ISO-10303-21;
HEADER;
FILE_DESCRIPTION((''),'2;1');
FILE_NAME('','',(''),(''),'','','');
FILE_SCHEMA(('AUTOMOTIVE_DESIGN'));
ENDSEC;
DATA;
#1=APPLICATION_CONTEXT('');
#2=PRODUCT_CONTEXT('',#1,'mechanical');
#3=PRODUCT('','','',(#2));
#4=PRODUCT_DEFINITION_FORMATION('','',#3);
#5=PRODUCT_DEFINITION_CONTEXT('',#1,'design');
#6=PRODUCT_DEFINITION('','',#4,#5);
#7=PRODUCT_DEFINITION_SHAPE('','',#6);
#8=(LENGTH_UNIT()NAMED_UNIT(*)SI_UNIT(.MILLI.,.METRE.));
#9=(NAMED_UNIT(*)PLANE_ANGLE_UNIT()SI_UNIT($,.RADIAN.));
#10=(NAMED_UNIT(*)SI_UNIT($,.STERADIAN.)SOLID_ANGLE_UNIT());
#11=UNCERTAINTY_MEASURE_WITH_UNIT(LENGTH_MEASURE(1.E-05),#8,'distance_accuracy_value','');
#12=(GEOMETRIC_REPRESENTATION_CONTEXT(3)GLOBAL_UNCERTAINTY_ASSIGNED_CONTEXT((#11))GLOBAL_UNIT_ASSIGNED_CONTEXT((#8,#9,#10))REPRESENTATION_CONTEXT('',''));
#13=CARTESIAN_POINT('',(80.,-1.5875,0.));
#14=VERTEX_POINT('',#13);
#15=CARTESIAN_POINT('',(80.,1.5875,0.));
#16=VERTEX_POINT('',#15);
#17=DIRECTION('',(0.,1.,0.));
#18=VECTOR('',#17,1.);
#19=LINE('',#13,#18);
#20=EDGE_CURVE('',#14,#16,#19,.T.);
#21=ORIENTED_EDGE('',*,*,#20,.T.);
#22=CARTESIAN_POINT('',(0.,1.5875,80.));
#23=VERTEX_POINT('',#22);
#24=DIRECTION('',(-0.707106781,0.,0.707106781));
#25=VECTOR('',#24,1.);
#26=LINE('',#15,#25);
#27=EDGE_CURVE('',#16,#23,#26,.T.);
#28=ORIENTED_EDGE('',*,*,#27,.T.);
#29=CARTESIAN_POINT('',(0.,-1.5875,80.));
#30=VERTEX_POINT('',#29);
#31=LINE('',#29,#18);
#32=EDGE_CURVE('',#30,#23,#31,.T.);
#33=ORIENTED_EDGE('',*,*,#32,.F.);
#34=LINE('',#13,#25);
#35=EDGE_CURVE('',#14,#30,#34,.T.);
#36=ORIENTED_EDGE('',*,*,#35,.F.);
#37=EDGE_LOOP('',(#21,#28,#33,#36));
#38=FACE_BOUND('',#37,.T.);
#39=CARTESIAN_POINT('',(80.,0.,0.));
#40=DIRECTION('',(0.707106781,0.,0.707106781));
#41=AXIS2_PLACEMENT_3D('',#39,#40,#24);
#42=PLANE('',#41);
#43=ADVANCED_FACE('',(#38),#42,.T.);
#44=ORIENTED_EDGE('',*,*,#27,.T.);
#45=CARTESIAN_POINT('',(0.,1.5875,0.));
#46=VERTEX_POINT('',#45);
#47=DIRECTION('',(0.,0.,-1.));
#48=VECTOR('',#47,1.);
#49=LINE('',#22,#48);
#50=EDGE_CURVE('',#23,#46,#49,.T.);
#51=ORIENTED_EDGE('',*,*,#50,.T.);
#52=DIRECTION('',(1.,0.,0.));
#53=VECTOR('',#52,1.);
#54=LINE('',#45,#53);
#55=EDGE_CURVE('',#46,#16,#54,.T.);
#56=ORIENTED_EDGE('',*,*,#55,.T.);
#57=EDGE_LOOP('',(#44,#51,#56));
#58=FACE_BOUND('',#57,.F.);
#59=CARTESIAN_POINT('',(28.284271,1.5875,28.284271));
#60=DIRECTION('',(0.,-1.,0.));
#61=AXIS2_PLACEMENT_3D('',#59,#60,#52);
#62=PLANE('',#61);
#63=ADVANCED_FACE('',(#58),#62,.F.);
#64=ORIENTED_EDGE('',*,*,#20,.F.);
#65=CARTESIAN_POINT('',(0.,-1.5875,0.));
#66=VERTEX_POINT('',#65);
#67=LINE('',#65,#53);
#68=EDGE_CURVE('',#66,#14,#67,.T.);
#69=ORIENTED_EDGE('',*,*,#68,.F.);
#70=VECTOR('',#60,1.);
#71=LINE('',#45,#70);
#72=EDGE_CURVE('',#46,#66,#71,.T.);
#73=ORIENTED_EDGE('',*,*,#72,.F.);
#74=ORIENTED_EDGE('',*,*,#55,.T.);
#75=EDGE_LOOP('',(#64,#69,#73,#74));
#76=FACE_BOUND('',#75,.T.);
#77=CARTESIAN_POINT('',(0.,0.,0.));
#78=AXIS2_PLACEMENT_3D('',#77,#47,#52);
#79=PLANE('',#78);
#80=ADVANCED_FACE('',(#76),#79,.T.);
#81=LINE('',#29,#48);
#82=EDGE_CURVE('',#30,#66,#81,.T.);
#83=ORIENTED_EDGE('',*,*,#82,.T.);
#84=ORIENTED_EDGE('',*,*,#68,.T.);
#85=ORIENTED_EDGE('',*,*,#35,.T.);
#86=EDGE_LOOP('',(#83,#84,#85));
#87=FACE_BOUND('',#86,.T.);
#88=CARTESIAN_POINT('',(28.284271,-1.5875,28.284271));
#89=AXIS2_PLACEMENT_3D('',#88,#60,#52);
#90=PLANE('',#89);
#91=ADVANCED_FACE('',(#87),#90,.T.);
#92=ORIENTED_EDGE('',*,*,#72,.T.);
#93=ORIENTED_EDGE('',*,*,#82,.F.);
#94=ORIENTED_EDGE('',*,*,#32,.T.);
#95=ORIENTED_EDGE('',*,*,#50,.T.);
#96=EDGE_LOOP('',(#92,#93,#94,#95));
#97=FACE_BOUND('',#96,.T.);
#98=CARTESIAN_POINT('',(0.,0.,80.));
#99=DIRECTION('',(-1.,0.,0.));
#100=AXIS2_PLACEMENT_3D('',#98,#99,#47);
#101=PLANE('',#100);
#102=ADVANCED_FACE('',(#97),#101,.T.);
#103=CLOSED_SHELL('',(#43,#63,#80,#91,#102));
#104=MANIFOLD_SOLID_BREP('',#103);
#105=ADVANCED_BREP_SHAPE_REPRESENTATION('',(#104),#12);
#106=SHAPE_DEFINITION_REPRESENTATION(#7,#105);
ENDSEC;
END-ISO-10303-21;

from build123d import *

# Parameters (mm, degrees)
F1_DEPTH = 1.5875


# Not quite as in the source:
# - a length typed as a fraction of an inch, garbled in the dataset ("3 / 203.2 mm" for 3/8 in), is restored


with BuildPart() as f1:
    # F0 (on Front) → F1 (new body, symmetric)
    with BuildSketch(Plane.XZ):
        Polygon((0, 80), (0, 0), (80, 0), align=None)
    extrude(amount=F1_DEPTH, both=True)


solid = f1.part
